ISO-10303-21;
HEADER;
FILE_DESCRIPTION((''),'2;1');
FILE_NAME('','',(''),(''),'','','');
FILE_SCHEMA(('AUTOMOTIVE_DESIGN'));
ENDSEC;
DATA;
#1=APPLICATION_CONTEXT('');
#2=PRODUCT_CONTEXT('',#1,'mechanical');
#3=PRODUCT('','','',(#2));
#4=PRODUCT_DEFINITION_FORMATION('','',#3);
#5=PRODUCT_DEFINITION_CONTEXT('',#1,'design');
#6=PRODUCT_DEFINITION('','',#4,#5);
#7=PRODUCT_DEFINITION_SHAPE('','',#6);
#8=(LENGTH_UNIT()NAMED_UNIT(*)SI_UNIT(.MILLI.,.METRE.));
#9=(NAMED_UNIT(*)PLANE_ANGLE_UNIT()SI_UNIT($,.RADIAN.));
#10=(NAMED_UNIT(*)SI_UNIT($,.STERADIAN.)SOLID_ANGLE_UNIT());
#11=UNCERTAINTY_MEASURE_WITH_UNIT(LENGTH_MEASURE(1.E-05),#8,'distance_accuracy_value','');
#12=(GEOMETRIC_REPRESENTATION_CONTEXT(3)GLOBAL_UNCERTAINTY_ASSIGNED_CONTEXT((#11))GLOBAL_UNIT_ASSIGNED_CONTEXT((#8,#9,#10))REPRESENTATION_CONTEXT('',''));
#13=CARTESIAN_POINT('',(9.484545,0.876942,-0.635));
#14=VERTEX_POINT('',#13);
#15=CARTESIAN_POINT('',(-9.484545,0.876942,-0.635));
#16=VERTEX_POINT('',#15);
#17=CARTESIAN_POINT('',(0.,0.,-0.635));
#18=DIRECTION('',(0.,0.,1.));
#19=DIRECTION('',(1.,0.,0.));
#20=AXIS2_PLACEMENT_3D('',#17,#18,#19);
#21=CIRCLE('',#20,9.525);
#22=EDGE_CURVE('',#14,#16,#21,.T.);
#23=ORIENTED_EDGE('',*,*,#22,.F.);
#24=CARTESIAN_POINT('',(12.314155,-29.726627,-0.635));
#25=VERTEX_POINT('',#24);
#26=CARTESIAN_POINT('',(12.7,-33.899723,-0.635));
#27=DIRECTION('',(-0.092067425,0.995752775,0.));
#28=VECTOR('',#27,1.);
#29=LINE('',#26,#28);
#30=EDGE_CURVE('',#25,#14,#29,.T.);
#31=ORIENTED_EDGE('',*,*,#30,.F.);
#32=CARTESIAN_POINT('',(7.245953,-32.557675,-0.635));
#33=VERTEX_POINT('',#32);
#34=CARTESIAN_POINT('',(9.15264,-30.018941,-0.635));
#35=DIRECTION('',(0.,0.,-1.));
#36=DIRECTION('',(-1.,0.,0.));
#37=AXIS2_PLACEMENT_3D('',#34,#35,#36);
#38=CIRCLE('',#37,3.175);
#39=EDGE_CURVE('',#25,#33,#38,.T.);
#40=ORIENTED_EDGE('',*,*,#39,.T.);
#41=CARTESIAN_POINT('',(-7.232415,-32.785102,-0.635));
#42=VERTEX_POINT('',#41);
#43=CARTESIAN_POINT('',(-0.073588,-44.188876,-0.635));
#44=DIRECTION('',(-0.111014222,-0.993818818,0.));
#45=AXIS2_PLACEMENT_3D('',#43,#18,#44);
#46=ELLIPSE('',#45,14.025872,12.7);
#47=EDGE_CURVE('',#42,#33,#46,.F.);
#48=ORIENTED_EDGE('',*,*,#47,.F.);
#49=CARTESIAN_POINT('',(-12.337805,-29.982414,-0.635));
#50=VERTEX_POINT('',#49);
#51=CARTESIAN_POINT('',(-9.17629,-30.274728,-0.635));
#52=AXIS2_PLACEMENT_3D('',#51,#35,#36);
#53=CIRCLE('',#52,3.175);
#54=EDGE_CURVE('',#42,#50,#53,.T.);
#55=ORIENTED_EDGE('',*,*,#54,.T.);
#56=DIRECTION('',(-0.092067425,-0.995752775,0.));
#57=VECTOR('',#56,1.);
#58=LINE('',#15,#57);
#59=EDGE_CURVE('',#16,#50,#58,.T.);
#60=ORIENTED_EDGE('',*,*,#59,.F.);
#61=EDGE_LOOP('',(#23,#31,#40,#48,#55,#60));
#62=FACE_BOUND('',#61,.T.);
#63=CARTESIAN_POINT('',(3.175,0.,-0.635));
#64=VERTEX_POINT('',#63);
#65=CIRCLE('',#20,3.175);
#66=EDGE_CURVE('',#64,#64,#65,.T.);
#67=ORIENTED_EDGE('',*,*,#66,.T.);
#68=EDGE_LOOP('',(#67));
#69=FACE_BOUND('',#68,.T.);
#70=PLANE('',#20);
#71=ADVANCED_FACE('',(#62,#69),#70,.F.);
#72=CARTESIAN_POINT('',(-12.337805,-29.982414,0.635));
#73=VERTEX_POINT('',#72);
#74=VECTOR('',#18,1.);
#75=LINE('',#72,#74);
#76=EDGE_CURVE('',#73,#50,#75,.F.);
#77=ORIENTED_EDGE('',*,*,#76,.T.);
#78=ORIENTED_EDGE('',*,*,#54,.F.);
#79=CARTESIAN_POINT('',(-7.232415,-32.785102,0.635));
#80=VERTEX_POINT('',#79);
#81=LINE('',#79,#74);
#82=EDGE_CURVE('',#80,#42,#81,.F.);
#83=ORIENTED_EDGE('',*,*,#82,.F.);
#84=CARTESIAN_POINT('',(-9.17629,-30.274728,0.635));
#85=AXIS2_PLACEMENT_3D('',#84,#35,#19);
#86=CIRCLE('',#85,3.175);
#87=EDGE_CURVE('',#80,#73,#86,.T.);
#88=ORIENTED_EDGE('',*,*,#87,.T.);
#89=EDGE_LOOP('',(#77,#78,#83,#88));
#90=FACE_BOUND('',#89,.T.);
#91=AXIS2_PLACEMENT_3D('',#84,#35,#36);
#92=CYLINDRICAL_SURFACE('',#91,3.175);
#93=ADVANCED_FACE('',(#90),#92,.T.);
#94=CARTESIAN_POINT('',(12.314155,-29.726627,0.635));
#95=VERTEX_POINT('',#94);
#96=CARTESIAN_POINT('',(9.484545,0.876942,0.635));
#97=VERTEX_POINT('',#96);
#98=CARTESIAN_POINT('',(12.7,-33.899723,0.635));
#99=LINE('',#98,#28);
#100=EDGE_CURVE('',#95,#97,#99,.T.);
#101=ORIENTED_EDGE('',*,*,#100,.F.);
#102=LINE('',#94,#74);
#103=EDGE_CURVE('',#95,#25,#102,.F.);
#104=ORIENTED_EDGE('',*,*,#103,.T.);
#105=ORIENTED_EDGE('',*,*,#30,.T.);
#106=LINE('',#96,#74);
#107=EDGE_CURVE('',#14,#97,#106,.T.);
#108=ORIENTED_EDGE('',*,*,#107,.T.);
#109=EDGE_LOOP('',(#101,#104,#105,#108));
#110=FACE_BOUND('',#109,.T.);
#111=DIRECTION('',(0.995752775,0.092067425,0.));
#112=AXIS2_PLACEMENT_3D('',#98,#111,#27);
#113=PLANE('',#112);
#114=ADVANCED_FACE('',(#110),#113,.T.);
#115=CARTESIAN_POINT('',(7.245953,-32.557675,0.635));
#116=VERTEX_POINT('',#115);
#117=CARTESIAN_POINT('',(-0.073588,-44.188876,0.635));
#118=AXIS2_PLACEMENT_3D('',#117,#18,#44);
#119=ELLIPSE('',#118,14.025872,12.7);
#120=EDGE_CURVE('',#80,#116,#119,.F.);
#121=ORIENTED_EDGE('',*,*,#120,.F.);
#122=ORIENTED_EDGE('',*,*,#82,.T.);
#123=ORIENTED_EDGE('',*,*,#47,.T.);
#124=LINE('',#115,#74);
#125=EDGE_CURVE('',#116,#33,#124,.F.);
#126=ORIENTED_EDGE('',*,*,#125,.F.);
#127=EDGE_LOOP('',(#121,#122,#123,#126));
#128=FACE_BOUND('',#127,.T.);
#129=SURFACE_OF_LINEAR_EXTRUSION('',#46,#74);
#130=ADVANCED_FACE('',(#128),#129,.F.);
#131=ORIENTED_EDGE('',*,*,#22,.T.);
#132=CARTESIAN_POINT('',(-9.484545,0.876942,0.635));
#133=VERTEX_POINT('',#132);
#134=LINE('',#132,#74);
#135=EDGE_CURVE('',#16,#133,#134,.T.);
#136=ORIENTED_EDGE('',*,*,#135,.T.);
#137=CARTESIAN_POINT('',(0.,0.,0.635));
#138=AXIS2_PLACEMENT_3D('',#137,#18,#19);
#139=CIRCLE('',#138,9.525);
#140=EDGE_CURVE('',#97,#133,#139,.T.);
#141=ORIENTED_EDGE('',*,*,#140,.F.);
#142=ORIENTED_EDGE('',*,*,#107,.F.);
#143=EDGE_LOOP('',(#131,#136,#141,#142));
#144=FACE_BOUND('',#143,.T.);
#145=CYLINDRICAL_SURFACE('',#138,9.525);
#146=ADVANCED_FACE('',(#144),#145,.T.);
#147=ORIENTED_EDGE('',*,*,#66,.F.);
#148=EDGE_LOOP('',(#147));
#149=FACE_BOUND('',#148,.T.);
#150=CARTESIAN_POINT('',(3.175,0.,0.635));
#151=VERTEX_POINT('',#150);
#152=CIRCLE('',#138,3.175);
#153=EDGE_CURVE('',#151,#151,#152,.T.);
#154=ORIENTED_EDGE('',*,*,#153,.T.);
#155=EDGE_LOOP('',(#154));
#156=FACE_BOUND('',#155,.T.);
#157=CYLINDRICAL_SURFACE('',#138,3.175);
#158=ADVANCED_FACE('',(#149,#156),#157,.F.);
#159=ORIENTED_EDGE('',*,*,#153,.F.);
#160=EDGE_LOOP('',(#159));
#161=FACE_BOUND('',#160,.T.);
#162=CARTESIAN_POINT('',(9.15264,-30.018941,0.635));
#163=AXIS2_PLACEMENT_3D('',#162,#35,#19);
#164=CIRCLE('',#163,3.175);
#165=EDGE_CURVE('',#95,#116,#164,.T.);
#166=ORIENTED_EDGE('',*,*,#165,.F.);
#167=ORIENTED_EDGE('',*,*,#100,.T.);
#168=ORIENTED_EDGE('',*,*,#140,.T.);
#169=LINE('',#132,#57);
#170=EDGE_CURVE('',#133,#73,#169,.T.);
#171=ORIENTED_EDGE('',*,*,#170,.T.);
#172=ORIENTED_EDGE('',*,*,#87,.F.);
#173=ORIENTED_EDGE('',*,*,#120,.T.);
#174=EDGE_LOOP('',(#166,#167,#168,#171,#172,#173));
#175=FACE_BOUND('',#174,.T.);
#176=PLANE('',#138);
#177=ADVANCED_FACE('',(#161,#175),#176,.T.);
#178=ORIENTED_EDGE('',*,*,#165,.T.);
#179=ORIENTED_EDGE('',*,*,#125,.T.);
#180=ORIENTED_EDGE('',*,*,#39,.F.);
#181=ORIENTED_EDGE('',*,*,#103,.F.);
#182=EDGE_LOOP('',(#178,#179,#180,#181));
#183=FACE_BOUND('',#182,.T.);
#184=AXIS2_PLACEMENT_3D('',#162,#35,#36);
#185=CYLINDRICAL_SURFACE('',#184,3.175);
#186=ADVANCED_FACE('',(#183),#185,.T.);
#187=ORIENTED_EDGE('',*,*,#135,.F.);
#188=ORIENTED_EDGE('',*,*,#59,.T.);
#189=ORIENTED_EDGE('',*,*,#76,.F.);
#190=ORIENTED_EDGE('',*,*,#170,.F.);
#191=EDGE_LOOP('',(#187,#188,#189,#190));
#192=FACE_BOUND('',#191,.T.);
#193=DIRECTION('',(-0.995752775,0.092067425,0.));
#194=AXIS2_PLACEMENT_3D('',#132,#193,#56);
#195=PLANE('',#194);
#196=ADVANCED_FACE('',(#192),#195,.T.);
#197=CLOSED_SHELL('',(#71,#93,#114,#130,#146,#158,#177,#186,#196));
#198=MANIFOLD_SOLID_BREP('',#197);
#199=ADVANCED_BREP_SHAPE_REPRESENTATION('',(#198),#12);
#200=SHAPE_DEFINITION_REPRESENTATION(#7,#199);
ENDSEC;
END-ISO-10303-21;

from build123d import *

# Parameters (mm, degrees)
SKETCH1_R           = 3.175
BOSS_EXTRUDE1_DEPTH = 0.635
CUT_EXTRUDE1_START  = -0.635
CUT_EXTRUDE1_DEPTH  = 1.27
CUT_EXTRUDE2_DEPTH  = 37.222840302


# Read off the part's stored shape, not the designer's step: Cut-Extrude1
with BuildPart() as part:
    # Sketch1 → Boss-Extrude1 (new, symmetric)
    with BuildSketch(Plane.XY):
        with BuildLine():
            Line((-9.484545184, 0.876942223), (-12.7, -33.89972345))
            Line((-12.7, -33.89972345), (12.7, -33.89972345))
            Line((12.7, -33.89972345), (9.484545184, 0.876942223))
            ThreePointArc((9.484545184, 0.876942223), (0, 9.525), (-9.484545184, 0.876942223))
        make_face()
        Circle(SKETCH1_R, mode=Mode.SUBTRACT)
    extrude(amount=BOSS_EXTRUDE1_DEPTH, both=True)

    # Cut-Extrude1 outline → Cut-Extrude1 (cut)
    with BuildSketch(Plane.XY.offset(CUT_EXTRUDE1_START)):
        with BuildLine():
            Line((-8.497954961, -33.89972345), (8.76063713, -33.89972345))
            add(Edge.make_bspline(
                [(8.76063713, -33.89972345), (0.306373234, -25.111661594), (-8.497954961, -33.89972345)],
                knots=[2.496380088, 2.496380088, 2.496380088, 3.988409978, 3.988409978, 3.988409978], degree=2, weights=[1, 0.73439942, 1]))
        make_face()
    extrude(amount=CUT_EXTRUDE1_DEPTH, mode=Mode.SUBTRACT)

    # Sketch3 → Cut-Extrude2 (cut, through all)
    with BuildSketch(Plane.XY.offset(0.635)):
        with BuildLine():
            Line((8.76063713, -33.89972345), (12.7, -33.89972345))
            Line((12.7, -33.89972345), (12.314154974, -29.726626876))
            ThreePointArc((12.314154974, -29.726626876), (10.7009799, -32.790811849), (7.245953049, -32.557674927))
            add(Edge.make_bspline(
                [(8.76063713, -33.89972345), (8.051791445, -33.162890557), (7.245953049, -32.557674927)],
                knots=[2.496380088, 2.496380088, 2.496380088, 2.651046381, 2.651046381, 2.651046381], degree=2, weights=[1, 0.997011282, 1]))
        make_face()
        with BuildLine():
            Line((-12.7, -33.89972345), (-8.497954961, -33.89972345))
            add(Edge.make_bspline(
                [(-7.23241505, -32.785101753), (-7.896265785, -33.299145918), (-8.497954961, -33.89972345)],
                knots=[3.862260272, 3.862260272, 3.862260272, 3.988409978, 3.988409978, 3.988409978], degree=2, weights=[1, 0.998011441, 1]))
            ThreePointArc((-7.23241505, -32.785101753), (-10.704172961, -33.057927648), (-12.337805101, -29.982414196))
            Line((-12.337805101, -29.982414196), (-12.7, -33.89972345))
        make_face()
    extrude(amount=-CUT_EXTRUDE2_DEPTH, mode=Mode.SUBTRACT)


solid = part.part
